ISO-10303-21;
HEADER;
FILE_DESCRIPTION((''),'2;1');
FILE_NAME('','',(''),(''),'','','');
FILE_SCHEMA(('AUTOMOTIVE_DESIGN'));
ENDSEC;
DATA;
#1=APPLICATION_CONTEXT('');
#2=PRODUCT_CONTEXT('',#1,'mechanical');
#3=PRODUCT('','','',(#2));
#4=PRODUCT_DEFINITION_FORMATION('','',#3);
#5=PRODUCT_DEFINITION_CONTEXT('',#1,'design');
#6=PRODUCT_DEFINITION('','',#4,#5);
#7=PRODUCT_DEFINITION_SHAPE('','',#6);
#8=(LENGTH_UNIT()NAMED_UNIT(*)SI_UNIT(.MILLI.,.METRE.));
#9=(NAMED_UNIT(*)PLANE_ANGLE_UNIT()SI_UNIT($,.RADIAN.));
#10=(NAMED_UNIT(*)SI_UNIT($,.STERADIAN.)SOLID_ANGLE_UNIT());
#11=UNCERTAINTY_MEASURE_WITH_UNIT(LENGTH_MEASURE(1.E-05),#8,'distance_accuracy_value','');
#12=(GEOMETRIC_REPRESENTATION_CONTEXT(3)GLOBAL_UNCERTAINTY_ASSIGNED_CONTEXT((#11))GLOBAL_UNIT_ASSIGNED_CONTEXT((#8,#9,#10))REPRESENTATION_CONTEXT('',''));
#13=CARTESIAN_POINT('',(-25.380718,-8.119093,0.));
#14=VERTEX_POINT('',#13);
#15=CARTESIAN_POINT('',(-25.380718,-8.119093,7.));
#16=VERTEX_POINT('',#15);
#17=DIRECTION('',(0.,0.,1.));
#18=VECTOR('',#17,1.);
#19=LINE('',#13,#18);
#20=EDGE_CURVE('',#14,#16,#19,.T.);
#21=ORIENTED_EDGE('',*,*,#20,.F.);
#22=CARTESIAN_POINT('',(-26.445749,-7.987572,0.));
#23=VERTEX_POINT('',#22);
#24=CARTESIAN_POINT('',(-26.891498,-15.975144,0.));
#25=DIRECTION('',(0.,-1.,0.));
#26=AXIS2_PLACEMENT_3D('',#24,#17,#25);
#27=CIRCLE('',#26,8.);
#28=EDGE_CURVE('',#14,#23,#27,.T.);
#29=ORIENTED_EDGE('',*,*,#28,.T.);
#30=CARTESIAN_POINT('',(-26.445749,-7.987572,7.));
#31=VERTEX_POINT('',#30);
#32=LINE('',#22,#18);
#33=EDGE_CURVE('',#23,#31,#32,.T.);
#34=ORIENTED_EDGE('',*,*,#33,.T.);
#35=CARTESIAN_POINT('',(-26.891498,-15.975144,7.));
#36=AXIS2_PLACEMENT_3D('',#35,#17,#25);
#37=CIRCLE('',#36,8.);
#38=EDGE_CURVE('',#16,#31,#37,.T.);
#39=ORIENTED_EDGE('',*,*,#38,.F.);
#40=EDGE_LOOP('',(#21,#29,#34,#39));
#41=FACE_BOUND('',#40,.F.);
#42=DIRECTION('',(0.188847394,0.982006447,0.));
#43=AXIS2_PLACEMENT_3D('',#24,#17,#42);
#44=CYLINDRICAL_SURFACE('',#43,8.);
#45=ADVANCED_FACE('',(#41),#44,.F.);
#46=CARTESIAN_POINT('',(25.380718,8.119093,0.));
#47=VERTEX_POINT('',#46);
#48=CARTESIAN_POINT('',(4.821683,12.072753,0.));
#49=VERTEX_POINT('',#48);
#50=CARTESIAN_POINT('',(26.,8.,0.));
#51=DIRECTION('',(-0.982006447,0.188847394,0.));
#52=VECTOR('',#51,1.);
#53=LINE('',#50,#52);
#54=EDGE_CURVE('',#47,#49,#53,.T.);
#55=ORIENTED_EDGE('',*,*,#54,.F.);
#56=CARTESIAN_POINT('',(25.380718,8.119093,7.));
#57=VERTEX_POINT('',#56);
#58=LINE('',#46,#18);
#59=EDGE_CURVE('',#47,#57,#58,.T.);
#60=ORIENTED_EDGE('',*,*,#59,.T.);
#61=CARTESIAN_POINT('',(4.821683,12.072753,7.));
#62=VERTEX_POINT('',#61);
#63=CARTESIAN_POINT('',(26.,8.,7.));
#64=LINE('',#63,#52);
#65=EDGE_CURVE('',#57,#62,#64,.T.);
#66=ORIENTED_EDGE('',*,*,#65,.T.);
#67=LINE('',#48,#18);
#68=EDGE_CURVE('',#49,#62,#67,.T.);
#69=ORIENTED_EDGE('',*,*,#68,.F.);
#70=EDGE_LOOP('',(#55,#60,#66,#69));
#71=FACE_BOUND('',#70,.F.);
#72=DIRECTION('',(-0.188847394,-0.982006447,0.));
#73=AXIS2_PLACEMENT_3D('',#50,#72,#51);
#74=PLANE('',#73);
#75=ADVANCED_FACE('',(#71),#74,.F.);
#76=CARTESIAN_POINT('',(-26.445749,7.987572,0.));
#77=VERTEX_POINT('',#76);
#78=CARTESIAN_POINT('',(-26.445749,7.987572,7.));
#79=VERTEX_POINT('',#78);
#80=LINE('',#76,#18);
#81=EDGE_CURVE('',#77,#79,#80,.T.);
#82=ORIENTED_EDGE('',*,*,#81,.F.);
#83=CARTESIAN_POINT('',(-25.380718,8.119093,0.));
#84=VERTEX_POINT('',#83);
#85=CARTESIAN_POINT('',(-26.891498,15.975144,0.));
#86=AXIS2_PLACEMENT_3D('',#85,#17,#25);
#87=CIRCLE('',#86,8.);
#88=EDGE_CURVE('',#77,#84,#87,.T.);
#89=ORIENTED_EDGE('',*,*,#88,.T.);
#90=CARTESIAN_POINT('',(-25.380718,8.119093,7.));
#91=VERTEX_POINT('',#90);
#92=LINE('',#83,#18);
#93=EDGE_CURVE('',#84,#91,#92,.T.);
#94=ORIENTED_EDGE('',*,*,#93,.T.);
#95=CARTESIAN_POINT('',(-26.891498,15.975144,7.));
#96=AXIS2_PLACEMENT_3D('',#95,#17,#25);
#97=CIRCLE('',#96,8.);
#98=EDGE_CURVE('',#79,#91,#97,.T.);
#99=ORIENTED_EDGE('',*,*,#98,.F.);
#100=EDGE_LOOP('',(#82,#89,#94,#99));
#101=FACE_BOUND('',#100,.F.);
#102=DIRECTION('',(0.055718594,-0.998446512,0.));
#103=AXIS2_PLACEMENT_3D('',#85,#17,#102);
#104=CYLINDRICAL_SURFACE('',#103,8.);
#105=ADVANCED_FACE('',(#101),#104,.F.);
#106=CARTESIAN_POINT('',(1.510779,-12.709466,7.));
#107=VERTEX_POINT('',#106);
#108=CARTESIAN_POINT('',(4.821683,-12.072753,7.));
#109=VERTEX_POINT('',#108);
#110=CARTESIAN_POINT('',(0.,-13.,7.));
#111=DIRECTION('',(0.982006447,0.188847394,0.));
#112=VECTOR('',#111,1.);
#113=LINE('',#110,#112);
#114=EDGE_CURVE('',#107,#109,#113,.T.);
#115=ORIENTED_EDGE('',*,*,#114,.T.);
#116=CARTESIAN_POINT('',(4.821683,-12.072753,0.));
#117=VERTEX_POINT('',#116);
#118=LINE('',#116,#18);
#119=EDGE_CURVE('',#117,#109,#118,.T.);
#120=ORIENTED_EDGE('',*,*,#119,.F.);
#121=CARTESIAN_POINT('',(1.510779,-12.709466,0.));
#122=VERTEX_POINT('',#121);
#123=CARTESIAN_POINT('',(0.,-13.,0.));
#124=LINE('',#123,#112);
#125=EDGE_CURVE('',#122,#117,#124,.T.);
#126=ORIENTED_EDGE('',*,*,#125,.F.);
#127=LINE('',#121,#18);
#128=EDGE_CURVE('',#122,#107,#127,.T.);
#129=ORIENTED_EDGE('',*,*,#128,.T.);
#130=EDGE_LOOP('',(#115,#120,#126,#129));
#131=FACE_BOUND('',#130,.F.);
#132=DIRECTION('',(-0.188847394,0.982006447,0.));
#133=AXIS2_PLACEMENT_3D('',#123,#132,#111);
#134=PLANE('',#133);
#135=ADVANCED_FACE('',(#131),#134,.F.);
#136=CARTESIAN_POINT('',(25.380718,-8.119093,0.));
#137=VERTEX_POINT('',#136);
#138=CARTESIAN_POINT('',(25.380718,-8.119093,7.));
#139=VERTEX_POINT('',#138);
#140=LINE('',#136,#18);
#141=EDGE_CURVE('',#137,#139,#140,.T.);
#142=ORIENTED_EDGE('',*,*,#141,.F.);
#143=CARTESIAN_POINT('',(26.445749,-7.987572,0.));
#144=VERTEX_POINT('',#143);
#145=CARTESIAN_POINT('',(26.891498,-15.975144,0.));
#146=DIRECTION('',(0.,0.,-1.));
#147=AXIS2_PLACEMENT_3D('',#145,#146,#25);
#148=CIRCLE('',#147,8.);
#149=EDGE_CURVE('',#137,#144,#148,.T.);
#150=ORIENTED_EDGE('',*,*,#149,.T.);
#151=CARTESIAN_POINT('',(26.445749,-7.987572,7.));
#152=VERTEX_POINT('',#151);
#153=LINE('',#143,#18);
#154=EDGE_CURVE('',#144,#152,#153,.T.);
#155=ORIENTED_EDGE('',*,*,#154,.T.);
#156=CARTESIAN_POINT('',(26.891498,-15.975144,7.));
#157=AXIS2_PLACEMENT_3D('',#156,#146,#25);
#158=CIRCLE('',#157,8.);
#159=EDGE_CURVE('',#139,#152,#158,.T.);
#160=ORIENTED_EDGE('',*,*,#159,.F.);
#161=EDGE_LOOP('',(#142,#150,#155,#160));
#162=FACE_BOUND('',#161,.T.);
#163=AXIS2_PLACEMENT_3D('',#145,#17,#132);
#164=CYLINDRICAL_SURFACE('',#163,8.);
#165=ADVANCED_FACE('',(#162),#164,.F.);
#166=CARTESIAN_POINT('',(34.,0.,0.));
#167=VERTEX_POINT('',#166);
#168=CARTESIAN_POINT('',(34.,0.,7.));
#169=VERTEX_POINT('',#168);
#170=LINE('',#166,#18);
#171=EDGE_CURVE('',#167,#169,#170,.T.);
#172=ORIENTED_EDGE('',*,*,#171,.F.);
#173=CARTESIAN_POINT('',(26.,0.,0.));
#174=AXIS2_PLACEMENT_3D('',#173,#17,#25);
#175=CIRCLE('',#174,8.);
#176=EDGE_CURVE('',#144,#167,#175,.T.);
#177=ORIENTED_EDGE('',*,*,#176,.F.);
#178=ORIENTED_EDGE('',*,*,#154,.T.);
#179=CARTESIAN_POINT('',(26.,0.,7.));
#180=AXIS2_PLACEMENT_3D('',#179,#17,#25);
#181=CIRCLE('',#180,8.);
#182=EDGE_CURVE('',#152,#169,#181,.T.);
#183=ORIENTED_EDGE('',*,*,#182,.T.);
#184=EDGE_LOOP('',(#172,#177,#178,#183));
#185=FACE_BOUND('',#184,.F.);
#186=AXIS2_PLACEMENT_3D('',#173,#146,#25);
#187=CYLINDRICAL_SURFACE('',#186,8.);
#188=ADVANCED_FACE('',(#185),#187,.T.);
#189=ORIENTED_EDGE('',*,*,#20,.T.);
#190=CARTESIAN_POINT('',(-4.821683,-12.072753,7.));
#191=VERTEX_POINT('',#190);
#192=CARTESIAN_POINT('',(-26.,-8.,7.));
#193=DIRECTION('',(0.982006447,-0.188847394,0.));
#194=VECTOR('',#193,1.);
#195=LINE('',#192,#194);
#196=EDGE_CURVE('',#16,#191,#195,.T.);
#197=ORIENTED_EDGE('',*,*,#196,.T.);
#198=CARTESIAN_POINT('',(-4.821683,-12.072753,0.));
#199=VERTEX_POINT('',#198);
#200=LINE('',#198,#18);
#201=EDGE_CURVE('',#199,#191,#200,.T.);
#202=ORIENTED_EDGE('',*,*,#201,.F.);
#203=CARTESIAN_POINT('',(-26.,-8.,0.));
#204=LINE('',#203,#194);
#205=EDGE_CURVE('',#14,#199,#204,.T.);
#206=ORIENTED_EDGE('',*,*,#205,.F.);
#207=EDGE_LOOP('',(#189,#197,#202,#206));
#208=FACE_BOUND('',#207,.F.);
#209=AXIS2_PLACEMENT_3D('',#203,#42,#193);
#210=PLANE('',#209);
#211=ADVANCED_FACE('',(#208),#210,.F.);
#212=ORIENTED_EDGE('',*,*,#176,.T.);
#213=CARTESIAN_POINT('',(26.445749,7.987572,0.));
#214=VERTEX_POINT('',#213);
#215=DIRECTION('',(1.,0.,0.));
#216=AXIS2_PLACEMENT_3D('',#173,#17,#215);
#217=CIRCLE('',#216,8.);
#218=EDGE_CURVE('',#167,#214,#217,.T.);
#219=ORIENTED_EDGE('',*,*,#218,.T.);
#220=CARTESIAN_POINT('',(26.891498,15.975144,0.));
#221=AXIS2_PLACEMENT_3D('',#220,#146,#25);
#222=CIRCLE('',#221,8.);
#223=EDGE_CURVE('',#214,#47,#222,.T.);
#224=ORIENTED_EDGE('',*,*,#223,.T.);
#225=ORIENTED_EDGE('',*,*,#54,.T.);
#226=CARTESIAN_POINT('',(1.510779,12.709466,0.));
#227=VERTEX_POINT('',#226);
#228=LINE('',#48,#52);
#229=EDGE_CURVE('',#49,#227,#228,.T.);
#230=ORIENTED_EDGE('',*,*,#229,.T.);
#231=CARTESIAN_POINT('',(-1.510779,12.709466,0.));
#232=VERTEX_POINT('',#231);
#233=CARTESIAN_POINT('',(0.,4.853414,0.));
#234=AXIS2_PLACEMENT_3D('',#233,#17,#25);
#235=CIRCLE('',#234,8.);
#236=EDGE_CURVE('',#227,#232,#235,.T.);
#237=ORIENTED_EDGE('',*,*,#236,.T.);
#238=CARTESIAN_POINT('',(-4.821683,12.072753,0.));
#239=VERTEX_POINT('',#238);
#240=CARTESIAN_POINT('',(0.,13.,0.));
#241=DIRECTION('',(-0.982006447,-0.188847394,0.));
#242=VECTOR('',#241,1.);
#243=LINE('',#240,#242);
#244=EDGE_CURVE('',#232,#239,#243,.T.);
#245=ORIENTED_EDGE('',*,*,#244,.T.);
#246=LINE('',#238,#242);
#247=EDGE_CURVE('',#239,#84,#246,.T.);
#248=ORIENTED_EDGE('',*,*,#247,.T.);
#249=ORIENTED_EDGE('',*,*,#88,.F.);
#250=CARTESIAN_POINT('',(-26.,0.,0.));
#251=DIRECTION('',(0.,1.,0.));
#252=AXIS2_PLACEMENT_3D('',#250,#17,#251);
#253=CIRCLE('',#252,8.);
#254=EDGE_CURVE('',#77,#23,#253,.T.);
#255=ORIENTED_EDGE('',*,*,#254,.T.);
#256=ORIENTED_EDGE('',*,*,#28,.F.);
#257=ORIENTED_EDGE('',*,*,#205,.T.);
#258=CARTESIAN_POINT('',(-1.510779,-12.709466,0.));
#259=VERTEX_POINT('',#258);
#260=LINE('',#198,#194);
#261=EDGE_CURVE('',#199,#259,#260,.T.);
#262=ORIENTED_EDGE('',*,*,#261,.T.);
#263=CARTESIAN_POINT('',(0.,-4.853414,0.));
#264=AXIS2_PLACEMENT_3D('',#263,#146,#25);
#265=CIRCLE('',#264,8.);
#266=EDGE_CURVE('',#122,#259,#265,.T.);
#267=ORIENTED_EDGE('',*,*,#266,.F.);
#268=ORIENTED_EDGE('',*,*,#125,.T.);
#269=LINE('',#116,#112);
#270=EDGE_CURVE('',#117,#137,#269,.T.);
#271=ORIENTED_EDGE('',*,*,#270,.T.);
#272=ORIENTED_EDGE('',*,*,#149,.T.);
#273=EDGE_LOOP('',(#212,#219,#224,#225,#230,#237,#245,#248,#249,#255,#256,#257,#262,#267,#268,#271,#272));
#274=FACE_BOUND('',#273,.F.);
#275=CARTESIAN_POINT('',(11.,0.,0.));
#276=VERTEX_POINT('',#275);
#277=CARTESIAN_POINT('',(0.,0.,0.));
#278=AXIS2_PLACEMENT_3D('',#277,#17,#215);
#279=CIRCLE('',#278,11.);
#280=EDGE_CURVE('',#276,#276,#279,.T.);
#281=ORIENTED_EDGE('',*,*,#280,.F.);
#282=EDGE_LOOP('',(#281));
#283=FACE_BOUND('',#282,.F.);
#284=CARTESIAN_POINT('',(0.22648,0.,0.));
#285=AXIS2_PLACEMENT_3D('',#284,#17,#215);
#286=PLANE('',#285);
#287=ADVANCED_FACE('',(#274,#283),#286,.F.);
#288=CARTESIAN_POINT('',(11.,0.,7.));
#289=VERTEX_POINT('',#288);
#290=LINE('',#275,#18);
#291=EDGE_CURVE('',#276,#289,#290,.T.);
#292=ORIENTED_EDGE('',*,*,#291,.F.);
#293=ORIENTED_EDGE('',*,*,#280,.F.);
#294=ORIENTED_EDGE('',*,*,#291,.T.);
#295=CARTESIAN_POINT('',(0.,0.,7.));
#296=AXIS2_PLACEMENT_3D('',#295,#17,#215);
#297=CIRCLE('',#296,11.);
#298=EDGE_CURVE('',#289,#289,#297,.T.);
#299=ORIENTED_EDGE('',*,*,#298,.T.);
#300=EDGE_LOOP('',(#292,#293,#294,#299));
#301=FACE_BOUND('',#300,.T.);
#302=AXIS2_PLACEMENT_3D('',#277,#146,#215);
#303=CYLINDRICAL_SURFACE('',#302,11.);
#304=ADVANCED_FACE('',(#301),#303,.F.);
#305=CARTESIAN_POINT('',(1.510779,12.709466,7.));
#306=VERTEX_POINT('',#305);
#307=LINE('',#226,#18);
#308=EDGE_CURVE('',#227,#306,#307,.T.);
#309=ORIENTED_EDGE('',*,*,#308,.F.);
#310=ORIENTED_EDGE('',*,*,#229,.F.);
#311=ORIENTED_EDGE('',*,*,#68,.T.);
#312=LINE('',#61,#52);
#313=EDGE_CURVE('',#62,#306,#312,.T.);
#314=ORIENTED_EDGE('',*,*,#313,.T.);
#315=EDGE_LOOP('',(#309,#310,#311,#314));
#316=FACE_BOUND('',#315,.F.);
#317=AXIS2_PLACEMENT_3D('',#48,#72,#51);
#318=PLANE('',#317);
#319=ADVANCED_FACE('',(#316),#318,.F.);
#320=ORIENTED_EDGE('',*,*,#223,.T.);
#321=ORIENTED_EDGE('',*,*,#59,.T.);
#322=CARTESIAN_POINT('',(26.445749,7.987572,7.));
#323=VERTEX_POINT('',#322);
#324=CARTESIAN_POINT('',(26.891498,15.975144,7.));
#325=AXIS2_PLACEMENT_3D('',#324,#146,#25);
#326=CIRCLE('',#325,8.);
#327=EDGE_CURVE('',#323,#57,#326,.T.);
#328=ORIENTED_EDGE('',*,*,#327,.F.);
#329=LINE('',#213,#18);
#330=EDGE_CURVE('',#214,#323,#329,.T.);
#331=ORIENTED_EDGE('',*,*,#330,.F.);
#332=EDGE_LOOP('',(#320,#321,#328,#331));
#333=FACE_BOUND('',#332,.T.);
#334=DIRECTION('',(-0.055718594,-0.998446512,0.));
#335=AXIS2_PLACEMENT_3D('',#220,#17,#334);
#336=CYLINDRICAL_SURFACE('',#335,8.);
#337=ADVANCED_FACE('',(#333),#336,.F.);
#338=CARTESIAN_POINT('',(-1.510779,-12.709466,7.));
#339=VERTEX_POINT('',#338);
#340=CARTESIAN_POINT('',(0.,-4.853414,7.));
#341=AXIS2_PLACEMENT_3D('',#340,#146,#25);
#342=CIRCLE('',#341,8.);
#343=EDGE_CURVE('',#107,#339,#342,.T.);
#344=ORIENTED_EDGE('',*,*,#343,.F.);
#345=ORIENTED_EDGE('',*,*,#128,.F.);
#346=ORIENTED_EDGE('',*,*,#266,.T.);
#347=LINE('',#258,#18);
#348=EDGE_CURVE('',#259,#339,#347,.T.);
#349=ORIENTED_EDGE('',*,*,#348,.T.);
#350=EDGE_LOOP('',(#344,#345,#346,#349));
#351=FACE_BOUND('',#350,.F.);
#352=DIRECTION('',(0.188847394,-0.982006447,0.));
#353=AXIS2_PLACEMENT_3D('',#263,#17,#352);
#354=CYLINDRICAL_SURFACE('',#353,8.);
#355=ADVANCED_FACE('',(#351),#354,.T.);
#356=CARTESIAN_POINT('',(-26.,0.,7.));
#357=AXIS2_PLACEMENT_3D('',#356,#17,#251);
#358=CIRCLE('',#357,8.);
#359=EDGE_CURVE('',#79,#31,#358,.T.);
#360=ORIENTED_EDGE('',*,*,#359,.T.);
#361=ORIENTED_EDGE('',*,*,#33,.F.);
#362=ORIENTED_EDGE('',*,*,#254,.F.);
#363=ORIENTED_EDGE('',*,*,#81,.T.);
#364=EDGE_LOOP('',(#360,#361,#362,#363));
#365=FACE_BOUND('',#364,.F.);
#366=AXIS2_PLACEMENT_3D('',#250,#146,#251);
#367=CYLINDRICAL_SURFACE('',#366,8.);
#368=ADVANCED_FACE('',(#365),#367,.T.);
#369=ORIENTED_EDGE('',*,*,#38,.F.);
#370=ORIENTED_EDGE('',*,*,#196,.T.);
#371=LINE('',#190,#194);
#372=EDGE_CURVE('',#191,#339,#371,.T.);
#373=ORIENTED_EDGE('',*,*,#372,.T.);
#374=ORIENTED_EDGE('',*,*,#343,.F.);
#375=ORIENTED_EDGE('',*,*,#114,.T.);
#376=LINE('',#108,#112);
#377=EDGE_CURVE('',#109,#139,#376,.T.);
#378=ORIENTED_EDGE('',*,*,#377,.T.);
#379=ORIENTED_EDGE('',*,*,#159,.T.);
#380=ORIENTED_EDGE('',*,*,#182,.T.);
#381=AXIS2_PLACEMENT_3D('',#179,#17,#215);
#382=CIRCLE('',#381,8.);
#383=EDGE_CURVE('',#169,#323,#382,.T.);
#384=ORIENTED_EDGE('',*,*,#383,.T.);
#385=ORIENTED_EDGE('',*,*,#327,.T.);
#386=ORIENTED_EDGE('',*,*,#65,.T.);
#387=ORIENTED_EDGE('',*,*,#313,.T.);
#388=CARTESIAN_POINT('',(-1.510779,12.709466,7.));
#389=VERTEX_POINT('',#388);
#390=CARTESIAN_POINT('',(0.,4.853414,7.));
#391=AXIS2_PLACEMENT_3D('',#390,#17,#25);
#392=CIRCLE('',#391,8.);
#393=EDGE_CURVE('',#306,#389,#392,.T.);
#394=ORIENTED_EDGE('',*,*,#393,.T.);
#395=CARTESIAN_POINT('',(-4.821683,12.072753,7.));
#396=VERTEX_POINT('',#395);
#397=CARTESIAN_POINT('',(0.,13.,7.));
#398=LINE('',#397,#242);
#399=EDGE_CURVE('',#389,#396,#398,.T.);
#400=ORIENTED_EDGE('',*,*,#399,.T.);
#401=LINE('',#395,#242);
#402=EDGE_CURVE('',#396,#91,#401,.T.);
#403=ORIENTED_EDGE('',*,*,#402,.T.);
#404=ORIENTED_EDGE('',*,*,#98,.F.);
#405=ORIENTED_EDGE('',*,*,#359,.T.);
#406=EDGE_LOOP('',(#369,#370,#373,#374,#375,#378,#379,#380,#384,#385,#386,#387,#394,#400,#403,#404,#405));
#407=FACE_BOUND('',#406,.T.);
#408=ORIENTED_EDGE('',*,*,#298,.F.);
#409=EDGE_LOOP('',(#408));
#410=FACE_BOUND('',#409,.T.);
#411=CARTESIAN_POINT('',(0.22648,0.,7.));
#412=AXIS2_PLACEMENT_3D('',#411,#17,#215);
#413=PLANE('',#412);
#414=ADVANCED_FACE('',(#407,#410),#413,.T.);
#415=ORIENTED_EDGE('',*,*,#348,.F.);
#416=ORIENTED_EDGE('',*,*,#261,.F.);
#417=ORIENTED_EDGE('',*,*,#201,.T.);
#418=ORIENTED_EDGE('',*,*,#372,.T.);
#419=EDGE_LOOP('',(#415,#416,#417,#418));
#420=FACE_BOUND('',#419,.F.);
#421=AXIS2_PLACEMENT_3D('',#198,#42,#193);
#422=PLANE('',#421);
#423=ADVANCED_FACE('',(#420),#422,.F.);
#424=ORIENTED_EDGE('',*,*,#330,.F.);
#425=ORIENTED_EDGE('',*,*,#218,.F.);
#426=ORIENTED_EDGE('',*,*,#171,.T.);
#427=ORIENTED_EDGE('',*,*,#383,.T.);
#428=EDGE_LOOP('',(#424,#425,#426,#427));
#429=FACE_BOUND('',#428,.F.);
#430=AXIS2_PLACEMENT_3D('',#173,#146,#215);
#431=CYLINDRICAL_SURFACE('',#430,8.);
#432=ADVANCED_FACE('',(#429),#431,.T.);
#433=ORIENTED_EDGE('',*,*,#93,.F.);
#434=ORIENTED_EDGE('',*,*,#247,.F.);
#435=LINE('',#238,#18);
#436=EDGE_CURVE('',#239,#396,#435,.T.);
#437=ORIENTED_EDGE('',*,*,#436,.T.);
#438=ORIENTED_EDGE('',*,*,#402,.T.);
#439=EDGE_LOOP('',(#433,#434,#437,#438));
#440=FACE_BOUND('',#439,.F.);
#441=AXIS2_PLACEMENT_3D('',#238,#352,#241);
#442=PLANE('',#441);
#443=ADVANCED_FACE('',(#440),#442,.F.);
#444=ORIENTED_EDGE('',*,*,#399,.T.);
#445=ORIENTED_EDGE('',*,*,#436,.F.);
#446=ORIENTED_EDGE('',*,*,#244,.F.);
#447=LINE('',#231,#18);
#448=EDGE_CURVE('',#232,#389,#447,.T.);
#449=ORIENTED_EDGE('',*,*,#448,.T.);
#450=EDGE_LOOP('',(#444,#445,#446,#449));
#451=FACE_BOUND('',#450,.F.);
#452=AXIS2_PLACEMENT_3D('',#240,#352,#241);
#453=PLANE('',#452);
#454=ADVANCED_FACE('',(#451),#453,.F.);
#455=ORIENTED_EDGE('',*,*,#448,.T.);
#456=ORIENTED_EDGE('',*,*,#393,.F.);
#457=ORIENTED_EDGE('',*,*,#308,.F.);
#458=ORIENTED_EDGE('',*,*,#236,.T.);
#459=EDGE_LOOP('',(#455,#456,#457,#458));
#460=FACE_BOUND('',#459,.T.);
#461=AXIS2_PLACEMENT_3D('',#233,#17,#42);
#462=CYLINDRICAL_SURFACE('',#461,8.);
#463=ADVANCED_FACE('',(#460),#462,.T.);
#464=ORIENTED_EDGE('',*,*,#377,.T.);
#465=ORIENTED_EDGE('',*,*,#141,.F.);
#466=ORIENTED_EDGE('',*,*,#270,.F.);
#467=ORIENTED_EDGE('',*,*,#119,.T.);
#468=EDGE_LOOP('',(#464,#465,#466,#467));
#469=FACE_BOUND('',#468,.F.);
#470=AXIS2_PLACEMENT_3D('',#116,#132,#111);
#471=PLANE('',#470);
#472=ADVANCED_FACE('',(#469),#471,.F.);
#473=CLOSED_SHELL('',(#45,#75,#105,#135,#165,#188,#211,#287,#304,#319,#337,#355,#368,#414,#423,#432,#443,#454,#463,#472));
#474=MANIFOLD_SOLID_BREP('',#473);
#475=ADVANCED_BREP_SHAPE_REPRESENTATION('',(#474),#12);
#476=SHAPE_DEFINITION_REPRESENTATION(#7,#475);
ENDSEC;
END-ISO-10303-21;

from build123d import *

# Parameters (mm, degrees)
F0_R     = 11
F1_DEPTH = 7
F2_R     = 8
F3_R     = 8


with BuildPart() as f1:
    # F0 (on Top) → F1 (new body)
    with BuildSketch(Plane.XY):
        with BuildLine():
            ThreePointArc((4.8216833096, -12.0727532097), (10.7629429763, -7.2910258872), (13, 0))
            ThreePointArc((13, 0), (10.7629429763, 7.2910258872), (4.8216833096, 12.0727532097))
            Line((4.8216833096, 12.0727532097), (0, 13))
            Line((0, 13), (-4.8216833096, 12.0727532097))
            ThreePointArc((-4.8216833096, 12.0727532097), (-13, 0), (-4.8216833096, -12.0727532097))
            Line((-4.8216833096, -12.0727532097), (0, -13))
            Line((0, -13), (4.8216833096, -12.0727532097))
        make_face()
        Circle(F0_R, mode=Mode.SUBTRACT)
        with BuildLine():
            ThreePointArc((4.8216833096, 12.0727532097), (10.7629429763, 7.2910258872), (13, 0))
            ThreePointArc((13, 0), (10.7629429763, -7.2910258872), (4.8216833096, -12.0727532097))
            Line((4.8216833096, -12.0727532097), (26, -8))
            ThreePointArc((26, -8), (18, 0), (26, 8))
            Line((26, 8), (4.8216833096, 12.0727532097))
        make_face()
        with BuildLine():
            ThreePointArc((34, 0), (31.6568542495, 5.6568542495), (26, 8))
            ThreePointArc((26, 8), (18, 0), (26, -8))
            ThreePointArc((26, -8), (31.6568542495, -5.6568542495), (34, 0))
        make_face()
        with BuildLine():
            ThreePointArc((-4.8216833096, -12.0727532097), (-13, 0), (-4.8216833096, 12.0727532097))
            Line((-4.8216833096, 12.0727532097), (-26, 8))
            ThreePointArc((-26, 8), (-20.3431457505, 5.6568542495), (-18, 0))
            ThreePointArc((-18, 0), (-20.3431457505, -5.6568542495), (-26, -8))
            Line((-26, -8), (-4.8216833096, -12.0727532097))
        make_face()
        with BuildLine():
            ThreePointArc((-18, 0), (-20.3431457505, 5.6568542495), (-26, 8))
            ThreePointArc((-26, 8), (-34, 0), (-26, -8))
            ThreePointArc((-26, -8), (-20.3431457505, -5.6568542495), (-18, 0))
        make_face()
    extrude(amount=F1_DEPTH)

    # F2
    f2_edges = [f1.edges().sort_by_distance(p)[0] for p in [
        (0, -13, 3.5),
        (0, 13, 3.5),
    ]]
    fillet(f2_edges, radius=F2_R)

    # F3
    f3_edges = [f1.edges().sort_by_distance(p)[0] for p in [
        (-26, -8, 3.5),
        (-26, 8, 3.5),
        (26, 8, 3.5),
        (26, -8, 3.5),
    ]]
    fillet(f3_edges, radius=F3_R)


solid = f1.part
